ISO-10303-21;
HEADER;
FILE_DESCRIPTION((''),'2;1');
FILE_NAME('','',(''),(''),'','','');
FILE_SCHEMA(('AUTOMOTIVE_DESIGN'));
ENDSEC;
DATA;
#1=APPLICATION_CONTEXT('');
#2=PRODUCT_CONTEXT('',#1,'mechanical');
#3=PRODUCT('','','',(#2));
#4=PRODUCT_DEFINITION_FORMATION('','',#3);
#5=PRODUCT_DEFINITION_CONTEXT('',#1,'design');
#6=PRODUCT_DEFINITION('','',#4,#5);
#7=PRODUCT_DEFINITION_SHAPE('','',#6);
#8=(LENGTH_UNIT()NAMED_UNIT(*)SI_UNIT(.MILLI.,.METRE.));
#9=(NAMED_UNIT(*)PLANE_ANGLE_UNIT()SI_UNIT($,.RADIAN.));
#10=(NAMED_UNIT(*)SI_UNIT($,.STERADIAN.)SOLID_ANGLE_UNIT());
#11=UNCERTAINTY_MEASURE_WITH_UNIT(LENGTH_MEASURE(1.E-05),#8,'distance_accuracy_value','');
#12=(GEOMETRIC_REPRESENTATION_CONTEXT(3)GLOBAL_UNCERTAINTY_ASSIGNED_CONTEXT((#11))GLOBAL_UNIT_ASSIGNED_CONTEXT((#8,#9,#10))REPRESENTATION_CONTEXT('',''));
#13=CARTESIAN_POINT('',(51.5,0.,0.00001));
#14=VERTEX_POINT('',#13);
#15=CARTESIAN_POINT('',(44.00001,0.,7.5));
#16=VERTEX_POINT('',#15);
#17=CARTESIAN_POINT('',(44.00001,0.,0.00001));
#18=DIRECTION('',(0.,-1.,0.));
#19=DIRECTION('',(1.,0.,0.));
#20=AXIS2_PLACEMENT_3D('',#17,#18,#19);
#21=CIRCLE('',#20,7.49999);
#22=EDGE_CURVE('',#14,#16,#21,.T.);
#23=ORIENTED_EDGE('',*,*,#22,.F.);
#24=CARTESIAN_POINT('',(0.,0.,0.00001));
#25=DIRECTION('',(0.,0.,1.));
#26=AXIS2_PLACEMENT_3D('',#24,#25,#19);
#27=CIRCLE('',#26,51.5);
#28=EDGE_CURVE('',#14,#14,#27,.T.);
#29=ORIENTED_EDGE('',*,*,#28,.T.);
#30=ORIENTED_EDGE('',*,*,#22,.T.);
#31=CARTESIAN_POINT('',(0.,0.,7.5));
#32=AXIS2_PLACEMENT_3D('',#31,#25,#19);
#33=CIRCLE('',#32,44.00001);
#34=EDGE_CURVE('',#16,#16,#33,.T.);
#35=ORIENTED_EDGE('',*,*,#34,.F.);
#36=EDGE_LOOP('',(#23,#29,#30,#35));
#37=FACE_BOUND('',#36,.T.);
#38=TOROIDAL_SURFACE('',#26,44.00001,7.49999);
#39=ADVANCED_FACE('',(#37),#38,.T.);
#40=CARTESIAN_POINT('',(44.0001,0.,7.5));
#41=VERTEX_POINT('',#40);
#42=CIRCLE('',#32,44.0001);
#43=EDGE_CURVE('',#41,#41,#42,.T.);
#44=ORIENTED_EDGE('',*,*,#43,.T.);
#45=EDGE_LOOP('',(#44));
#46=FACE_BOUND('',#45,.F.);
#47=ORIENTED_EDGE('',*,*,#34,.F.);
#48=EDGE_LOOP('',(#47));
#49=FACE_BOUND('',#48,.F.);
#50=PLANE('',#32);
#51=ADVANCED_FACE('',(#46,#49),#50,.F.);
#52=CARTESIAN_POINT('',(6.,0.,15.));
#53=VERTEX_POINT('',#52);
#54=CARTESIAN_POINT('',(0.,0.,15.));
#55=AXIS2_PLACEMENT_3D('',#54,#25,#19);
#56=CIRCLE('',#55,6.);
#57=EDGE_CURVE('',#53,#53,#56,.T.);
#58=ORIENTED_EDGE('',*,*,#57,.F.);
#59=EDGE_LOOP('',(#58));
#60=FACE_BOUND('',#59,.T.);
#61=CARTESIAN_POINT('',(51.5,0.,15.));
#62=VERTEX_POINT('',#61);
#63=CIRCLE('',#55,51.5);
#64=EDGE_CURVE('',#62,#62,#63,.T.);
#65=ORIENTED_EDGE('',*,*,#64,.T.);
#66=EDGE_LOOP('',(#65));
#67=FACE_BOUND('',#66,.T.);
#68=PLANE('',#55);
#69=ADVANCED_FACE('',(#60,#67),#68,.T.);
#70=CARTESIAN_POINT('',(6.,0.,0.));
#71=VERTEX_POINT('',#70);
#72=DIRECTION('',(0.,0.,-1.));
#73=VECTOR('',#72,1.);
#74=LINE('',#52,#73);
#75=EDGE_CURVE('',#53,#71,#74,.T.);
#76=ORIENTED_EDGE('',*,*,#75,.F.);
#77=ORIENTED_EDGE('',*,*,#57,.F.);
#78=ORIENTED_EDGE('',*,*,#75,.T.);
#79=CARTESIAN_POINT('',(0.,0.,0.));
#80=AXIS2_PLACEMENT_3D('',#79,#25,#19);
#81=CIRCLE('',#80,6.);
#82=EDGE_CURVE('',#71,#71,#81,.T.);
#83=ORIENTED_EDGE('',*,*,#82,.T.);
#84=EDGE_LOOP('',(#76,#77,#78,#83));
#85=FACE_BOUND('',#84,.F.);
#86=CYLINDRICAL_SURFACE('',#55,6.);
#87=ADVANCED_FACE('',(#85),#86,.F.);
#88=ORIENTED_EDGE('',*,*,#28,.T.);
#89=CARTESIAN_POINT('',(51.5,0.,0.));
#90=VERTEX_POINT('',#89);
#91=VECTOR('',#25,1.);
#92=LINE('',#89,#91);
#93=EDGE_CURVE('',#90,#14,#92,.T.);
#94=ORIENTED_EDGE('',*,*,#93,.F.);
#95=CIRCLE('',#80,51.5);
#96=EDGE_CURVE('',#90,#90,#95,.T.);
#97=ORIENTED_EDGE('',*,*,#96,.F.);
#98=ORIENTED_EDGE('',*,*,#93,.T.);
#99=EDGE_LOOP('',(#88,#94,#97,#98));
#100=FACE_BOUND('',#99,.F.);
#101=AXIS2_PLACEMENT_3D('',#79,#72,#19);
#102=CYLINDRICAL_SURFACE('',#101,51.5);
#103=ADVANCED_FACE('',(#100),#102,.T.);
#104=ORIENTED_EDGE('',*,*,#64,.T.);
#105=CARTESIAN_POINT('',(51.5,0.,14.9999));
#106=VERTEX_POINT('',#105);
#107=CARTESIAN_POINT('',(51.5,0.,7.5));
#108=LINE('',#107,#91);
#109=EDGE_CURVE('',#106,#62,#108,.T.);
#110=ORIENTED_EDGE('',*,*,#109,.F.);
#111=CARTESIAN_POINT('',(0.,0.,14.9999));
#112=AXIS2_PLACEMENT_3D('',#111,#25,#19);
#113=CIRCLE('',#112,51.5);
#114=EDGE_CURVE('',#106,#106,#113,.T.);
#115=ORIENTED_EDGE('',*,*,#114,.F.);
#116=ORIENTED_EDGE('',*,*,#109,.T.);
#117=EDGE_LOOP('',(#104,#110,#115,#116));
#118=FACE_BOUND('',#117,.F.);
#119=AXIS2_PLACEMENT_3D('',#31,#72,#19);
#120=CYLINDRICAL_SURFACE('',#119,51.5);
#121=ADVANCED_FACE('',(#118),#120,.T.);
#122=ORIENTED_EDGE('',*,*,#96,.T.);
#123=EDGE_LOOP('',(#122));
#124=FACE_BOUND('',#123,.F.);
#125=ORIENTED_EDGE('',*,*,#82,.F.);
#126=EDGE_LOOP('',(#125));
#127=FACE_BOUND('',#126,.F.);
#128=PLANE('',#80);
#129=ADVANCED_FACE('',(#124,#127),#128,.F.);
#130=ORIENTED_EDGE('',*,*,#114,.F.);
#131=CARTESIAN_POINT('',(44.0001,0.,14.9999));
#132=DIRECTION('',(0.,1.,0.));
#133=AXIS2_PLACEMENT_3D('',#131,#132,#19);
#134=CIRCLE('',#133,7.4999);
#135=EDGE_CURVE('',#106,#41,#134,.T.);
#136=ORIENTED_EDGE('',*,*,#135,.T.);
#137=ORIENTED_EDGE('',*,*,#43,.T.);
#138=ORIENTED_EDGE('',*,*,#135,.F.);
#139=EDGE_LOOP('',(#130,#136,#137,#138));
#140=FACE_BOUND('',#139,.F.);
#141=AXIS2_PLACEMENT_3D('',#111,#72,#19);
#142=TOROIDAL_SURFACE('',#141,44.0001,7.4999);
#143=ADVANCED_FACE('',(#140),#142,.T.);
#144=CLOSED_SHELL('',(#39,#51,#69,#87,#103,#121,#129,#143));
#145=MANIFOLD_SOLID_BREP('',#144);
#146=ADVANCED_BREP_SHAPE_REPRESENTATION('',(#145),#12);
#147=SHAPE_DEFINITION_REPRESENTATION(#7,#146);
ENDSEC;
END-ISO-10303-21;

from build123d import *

# Parameters (mm, degrees)
F0_R     = 51.5
F1_DEPTH = 7.5
F2_R     = 7.49999
F3_R     = 51.5
F3_R_2   = 44.00001
F4_DEPTH = 7.5
F5_R     = 7.4999
F6_R     = 6
F7_DEPTH = 25


# Not quite as in the source:
# - a fillet or chamfer is up to 0.001 mm smaller than in the source, because OpenCascade refuses the exact size


with BuildPart() as f1:
    # F0 (on Top) → F1 (new body)
    with BuildSketch(Plane.XY):
        Circle(F0_R)
    extrude(amount=F1_DEPTH)

    # F2 (radius 7.5 in the source; OpenCascade refuses exactly that, so slightly less here)
    f2_edges = [f1.edges().sort_by_distance(p)[0] for p in [
        (-51.5, 0, 7.5),
    ]]
    fillet(f2_edges, radius=F2_R)

    # F3 (on face) → F4 (join)
    with BuildSketch(Plane.XY.offset(7.5)):
        Circle(F3_R)
        Circle(F3_R_2, mode=Mode.SUBTRACT)
        Circle(F3_R_2)
    extrude(amount=F4_DEPTH)

    # F5 (radius 7.5 in the source; OpenCascade refuses exactly that, so slightly less here)
    f5_edges = [f1.edges().sort_by_distance(p)[0] for p in [
        (-51.5, 0, 7.5),
    ]]
    fillet(f5_edges, radius=F5_R)

    # F6 (on face) → F7 (cut)
    with BuildSketch(Plane.XY.offset(15)):
        Circle(F6_R)
    extrude(amount=-F7_DEPTH, mode=Mode.SUBTRACT)


solid = f1.part
